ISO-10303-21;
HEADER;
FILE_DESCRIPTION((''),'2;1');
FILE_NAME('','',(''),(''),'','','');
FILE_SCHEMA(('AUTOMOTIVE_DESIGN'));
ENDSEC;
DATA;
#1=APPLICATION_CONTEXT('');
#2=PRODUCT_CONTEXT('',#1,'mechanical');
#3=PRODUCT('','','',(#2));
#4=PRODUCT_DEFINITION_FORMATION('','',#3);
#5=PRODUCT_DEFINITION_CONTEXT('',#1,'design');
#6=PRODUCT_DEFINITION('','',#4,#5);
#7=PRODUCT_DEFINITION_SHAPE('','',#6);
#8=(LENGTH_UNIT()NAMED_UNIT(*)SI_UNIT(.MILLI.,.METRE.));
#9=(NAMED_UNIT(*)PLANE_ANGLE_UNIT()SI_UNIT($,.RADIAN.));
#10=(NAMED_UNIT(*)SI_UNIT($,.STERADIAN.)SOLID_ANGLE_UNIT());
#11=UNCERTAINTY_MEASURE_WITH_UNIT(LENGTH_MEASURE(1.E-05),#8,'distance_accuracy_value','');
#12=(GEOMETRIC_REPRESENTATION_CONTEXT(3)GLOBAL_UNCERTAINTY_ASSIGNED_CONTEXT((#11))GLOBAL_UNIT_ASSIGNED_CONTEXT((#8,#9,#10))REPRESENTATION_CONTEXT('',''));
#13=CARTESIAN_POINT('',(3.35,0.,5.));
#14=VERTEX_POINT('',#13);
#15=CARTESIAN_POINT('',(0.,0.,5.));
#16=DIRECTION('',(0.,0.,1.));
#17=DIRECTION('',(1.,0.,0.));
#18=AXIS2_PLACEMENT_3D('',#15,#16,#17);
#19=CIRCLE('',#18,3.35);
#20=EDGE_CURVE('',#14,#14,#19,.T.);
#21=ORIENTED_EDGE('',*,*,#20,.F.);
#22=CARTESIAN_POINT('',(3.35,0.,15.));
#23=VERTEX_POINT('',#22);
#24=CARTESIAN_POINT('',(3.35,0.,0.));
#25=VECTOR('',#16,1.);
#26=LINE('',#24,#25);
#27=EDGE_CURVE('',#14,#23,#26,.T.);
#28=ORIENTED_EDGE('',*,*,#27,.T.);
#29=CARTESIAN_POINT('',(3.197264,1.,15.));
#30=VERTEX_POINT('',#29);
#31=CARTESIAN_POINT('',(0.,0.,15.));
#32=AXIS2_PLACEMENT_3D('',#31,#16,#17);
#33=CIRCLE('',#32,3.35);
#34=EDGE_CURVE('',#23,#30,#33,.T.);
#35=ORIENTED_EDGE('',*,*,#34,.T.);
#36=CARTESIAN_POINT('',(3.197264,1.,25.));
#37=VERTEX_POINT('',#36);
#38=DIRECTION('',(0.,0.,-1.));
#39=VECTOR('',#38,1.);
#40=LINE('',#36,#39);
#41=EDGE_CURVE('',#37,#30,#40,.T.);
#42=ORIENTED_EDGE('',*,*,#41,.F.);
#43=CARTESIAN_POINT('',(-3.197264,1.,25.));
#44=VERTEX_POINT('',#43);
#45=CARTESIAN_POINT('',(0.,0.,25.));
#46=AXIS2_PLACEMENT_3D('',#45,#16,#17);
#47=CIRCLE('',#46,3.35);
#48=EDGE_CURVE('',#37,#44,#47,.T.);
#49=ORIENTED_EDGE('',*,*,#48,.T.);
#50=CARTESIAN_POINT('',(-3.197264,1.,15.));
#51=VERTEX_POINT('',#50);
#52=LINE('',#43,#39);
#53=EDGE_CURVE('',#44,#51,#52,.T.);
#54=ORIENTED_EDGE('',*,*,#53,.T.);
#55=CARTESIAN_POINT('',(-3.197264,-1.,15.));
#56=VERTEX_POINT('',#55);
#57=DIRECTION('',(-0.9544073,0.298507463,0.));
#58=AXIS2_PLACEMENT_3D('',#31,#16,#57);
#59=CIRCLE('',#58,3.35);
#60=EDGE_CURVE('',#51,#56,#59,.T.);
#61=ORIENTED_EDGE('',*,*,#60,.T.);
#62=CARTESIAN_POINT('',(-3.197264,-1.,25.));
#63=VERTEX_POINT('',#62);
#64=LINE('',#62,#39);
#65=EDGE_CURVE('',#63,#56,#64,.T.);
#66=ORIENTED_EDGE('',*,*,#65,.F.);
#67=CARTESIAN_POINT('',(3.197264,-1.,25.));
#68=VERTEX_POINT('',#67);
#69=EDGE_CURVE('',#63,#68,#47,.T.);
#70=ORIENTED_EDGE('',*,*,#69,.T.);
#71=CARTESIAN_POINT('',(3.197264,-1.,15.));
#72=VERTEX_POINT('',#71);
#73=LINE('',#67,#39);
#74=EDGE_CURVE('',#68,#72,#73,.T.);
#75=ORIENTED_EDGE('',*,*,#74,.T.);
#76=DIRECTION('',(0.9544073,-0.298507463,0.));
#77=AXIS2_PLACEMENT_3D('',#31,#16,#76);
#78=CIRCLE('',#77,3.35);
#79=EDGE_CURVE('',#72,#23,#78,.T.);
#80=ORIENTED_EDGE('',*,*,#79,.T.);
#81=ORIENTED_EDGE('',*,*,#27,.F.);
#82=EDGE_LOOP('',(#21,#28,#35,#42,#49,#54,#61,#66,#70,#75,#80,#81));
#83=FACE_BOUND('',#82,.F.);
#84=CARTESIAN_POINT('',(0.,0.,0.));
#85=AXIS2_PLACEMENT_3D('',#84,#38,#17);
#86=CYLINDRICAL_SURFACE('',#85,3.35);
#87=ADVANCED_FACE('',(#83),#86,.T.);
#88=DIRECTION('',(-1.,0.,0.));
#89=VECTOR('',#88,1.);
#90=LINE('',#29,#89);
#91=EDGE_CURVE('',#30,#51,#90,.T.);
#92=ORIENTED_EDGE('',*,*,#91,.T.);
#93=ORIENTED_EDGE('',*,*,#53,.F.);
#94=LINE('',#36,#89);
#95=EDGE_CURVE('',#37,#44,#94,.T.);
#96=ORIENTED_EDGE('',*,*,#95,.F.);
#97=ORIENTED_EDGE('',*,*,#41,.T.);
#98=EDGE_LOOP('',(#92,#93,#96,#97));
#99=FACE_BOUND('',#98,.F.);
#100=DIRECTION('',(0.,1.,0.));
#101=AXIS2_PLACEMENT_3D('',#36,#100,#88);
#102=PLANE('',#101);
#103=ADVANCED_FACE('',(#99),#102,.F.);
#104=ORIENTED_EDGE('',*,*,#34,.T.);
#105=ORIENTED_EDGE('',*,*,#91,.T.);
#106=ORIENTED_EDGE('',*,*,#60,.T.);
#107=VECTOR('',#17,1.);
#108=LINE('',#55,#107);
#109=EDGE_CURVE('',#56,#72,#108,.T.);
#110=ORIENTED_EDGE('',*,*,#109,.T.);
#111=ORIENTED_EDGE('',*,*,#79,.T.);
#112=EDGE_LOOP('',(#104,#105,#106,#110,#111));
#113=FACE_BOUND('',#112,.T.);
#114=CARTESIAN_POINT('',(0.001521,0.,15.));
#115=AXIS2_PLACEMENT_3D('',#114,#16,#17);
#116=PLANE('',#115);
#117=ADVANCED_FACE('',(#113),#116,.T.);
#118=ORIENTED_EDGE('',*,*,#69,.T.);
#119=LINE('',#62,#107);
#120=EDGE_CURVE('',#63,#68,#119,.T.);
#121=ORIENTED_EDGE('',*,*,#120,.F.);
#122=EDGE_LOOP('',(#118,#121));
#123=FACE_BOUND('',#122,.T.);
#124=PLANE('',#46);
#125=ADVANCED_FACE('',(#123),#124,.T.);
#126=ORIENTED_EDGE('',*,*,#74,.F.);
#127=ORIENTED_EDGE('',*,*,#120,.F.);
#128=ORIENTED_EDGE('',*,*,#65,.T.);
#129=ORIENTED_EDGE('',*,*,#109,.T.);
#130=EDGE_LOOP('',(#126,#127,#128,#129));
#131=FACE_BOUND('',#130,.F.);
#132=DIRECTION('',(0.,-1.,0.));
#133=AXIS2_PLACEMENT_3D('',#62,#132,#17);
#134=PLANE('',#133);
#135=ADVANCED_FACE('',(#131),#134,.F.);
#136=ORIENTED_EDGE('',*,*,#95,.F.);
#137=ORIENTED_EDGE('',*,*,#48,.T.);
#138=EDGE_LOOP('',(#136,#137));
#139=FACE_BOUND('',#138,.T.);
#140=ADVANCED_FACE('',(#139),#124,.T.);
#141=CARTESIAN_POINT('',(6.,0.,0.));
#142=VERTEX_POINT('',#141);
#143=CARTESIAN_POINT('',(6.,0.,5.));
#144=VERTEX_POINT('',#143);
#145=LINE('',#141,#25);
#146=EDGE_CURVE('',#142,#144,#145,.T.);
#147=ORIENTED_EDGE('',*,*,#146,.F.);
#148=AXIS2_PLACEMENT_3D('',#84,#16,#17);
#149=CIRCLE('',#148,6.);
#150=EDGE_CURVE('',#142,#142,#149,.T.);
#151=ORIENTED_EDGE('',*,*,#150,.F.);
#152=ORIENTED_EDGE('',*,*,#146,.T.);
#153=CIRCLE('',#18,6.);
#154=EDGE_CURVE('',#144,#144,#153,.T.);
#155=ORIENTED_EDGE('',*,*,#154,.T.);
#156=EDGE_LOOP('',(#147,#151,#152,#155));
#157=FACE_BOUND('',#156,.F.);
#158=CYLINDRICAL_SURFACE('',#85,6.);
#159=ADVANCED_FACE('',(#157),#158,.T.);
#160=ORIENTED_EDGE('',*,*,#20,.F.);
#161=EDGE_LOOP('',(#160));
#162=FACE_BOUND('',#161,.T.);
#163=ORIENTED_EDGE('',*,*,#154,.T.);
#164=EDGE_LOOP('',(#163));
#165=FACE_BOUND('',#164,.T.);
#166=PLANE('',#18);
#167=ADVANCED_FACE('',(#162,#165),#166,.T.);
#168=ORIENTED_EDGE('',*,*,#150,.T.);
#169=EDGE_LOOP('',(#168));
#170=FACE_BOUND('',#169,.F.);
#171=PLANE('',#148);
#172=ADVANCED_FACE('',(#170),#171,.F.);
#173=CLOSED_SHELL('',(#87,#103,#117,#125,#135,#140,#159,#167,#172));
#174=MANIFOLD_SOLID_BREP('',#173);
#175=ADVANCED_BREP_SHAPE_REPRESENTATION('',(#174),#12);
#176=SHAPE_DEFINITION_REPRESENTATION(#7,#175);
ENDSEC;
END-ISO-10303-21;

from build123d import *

# Parameters (mm, degrees)
F0_R     = 3.35
F1_DEPTH = 25
F0_R_2   = 6
F2_DEPTH = 5
F4_DEPTH = 10


with BuildPart() as f1:
    # F0 (on Top) → F1 (new body)
    with BuildSketch(Plane.XY):
        Circle(F0_R)
    extrude(amount=F1_DEPTH)

    # F0 (on Top) → F2 (join)
    with BuildSketch(Plane.XY):
        Circle(F0_R_2)
        Circle(F0_R, mode=Mode.SUBTRACT)
    extrude(amount=F2_DEPTH)

    # F3 (on face) → F4 (cut)
    with BuildSketch(Plane.XY.offset(25)):
        with BuildLine():
            ThreePointArc((-3.1972644557, 1), (-3.35, 0), (-3.1972644557, -1))
            Line((-3.1972644557, -1), (3.1972644557, -1))
            ThreePointArc((3.1972644557, -1), (3.3115959843, -0.505798415), (3.35, 0))
            ThreePointArc((3.35, 0), (3.3115959843, 0.505798415), (3.1972644557, 1))
            Line((3.1972644557, 1), (-3.1972644557, 1))
        make_face()
    extrude(amount=-F4_DEPTH, mode=Mode.SUBTRACT)


solid = f1.part
